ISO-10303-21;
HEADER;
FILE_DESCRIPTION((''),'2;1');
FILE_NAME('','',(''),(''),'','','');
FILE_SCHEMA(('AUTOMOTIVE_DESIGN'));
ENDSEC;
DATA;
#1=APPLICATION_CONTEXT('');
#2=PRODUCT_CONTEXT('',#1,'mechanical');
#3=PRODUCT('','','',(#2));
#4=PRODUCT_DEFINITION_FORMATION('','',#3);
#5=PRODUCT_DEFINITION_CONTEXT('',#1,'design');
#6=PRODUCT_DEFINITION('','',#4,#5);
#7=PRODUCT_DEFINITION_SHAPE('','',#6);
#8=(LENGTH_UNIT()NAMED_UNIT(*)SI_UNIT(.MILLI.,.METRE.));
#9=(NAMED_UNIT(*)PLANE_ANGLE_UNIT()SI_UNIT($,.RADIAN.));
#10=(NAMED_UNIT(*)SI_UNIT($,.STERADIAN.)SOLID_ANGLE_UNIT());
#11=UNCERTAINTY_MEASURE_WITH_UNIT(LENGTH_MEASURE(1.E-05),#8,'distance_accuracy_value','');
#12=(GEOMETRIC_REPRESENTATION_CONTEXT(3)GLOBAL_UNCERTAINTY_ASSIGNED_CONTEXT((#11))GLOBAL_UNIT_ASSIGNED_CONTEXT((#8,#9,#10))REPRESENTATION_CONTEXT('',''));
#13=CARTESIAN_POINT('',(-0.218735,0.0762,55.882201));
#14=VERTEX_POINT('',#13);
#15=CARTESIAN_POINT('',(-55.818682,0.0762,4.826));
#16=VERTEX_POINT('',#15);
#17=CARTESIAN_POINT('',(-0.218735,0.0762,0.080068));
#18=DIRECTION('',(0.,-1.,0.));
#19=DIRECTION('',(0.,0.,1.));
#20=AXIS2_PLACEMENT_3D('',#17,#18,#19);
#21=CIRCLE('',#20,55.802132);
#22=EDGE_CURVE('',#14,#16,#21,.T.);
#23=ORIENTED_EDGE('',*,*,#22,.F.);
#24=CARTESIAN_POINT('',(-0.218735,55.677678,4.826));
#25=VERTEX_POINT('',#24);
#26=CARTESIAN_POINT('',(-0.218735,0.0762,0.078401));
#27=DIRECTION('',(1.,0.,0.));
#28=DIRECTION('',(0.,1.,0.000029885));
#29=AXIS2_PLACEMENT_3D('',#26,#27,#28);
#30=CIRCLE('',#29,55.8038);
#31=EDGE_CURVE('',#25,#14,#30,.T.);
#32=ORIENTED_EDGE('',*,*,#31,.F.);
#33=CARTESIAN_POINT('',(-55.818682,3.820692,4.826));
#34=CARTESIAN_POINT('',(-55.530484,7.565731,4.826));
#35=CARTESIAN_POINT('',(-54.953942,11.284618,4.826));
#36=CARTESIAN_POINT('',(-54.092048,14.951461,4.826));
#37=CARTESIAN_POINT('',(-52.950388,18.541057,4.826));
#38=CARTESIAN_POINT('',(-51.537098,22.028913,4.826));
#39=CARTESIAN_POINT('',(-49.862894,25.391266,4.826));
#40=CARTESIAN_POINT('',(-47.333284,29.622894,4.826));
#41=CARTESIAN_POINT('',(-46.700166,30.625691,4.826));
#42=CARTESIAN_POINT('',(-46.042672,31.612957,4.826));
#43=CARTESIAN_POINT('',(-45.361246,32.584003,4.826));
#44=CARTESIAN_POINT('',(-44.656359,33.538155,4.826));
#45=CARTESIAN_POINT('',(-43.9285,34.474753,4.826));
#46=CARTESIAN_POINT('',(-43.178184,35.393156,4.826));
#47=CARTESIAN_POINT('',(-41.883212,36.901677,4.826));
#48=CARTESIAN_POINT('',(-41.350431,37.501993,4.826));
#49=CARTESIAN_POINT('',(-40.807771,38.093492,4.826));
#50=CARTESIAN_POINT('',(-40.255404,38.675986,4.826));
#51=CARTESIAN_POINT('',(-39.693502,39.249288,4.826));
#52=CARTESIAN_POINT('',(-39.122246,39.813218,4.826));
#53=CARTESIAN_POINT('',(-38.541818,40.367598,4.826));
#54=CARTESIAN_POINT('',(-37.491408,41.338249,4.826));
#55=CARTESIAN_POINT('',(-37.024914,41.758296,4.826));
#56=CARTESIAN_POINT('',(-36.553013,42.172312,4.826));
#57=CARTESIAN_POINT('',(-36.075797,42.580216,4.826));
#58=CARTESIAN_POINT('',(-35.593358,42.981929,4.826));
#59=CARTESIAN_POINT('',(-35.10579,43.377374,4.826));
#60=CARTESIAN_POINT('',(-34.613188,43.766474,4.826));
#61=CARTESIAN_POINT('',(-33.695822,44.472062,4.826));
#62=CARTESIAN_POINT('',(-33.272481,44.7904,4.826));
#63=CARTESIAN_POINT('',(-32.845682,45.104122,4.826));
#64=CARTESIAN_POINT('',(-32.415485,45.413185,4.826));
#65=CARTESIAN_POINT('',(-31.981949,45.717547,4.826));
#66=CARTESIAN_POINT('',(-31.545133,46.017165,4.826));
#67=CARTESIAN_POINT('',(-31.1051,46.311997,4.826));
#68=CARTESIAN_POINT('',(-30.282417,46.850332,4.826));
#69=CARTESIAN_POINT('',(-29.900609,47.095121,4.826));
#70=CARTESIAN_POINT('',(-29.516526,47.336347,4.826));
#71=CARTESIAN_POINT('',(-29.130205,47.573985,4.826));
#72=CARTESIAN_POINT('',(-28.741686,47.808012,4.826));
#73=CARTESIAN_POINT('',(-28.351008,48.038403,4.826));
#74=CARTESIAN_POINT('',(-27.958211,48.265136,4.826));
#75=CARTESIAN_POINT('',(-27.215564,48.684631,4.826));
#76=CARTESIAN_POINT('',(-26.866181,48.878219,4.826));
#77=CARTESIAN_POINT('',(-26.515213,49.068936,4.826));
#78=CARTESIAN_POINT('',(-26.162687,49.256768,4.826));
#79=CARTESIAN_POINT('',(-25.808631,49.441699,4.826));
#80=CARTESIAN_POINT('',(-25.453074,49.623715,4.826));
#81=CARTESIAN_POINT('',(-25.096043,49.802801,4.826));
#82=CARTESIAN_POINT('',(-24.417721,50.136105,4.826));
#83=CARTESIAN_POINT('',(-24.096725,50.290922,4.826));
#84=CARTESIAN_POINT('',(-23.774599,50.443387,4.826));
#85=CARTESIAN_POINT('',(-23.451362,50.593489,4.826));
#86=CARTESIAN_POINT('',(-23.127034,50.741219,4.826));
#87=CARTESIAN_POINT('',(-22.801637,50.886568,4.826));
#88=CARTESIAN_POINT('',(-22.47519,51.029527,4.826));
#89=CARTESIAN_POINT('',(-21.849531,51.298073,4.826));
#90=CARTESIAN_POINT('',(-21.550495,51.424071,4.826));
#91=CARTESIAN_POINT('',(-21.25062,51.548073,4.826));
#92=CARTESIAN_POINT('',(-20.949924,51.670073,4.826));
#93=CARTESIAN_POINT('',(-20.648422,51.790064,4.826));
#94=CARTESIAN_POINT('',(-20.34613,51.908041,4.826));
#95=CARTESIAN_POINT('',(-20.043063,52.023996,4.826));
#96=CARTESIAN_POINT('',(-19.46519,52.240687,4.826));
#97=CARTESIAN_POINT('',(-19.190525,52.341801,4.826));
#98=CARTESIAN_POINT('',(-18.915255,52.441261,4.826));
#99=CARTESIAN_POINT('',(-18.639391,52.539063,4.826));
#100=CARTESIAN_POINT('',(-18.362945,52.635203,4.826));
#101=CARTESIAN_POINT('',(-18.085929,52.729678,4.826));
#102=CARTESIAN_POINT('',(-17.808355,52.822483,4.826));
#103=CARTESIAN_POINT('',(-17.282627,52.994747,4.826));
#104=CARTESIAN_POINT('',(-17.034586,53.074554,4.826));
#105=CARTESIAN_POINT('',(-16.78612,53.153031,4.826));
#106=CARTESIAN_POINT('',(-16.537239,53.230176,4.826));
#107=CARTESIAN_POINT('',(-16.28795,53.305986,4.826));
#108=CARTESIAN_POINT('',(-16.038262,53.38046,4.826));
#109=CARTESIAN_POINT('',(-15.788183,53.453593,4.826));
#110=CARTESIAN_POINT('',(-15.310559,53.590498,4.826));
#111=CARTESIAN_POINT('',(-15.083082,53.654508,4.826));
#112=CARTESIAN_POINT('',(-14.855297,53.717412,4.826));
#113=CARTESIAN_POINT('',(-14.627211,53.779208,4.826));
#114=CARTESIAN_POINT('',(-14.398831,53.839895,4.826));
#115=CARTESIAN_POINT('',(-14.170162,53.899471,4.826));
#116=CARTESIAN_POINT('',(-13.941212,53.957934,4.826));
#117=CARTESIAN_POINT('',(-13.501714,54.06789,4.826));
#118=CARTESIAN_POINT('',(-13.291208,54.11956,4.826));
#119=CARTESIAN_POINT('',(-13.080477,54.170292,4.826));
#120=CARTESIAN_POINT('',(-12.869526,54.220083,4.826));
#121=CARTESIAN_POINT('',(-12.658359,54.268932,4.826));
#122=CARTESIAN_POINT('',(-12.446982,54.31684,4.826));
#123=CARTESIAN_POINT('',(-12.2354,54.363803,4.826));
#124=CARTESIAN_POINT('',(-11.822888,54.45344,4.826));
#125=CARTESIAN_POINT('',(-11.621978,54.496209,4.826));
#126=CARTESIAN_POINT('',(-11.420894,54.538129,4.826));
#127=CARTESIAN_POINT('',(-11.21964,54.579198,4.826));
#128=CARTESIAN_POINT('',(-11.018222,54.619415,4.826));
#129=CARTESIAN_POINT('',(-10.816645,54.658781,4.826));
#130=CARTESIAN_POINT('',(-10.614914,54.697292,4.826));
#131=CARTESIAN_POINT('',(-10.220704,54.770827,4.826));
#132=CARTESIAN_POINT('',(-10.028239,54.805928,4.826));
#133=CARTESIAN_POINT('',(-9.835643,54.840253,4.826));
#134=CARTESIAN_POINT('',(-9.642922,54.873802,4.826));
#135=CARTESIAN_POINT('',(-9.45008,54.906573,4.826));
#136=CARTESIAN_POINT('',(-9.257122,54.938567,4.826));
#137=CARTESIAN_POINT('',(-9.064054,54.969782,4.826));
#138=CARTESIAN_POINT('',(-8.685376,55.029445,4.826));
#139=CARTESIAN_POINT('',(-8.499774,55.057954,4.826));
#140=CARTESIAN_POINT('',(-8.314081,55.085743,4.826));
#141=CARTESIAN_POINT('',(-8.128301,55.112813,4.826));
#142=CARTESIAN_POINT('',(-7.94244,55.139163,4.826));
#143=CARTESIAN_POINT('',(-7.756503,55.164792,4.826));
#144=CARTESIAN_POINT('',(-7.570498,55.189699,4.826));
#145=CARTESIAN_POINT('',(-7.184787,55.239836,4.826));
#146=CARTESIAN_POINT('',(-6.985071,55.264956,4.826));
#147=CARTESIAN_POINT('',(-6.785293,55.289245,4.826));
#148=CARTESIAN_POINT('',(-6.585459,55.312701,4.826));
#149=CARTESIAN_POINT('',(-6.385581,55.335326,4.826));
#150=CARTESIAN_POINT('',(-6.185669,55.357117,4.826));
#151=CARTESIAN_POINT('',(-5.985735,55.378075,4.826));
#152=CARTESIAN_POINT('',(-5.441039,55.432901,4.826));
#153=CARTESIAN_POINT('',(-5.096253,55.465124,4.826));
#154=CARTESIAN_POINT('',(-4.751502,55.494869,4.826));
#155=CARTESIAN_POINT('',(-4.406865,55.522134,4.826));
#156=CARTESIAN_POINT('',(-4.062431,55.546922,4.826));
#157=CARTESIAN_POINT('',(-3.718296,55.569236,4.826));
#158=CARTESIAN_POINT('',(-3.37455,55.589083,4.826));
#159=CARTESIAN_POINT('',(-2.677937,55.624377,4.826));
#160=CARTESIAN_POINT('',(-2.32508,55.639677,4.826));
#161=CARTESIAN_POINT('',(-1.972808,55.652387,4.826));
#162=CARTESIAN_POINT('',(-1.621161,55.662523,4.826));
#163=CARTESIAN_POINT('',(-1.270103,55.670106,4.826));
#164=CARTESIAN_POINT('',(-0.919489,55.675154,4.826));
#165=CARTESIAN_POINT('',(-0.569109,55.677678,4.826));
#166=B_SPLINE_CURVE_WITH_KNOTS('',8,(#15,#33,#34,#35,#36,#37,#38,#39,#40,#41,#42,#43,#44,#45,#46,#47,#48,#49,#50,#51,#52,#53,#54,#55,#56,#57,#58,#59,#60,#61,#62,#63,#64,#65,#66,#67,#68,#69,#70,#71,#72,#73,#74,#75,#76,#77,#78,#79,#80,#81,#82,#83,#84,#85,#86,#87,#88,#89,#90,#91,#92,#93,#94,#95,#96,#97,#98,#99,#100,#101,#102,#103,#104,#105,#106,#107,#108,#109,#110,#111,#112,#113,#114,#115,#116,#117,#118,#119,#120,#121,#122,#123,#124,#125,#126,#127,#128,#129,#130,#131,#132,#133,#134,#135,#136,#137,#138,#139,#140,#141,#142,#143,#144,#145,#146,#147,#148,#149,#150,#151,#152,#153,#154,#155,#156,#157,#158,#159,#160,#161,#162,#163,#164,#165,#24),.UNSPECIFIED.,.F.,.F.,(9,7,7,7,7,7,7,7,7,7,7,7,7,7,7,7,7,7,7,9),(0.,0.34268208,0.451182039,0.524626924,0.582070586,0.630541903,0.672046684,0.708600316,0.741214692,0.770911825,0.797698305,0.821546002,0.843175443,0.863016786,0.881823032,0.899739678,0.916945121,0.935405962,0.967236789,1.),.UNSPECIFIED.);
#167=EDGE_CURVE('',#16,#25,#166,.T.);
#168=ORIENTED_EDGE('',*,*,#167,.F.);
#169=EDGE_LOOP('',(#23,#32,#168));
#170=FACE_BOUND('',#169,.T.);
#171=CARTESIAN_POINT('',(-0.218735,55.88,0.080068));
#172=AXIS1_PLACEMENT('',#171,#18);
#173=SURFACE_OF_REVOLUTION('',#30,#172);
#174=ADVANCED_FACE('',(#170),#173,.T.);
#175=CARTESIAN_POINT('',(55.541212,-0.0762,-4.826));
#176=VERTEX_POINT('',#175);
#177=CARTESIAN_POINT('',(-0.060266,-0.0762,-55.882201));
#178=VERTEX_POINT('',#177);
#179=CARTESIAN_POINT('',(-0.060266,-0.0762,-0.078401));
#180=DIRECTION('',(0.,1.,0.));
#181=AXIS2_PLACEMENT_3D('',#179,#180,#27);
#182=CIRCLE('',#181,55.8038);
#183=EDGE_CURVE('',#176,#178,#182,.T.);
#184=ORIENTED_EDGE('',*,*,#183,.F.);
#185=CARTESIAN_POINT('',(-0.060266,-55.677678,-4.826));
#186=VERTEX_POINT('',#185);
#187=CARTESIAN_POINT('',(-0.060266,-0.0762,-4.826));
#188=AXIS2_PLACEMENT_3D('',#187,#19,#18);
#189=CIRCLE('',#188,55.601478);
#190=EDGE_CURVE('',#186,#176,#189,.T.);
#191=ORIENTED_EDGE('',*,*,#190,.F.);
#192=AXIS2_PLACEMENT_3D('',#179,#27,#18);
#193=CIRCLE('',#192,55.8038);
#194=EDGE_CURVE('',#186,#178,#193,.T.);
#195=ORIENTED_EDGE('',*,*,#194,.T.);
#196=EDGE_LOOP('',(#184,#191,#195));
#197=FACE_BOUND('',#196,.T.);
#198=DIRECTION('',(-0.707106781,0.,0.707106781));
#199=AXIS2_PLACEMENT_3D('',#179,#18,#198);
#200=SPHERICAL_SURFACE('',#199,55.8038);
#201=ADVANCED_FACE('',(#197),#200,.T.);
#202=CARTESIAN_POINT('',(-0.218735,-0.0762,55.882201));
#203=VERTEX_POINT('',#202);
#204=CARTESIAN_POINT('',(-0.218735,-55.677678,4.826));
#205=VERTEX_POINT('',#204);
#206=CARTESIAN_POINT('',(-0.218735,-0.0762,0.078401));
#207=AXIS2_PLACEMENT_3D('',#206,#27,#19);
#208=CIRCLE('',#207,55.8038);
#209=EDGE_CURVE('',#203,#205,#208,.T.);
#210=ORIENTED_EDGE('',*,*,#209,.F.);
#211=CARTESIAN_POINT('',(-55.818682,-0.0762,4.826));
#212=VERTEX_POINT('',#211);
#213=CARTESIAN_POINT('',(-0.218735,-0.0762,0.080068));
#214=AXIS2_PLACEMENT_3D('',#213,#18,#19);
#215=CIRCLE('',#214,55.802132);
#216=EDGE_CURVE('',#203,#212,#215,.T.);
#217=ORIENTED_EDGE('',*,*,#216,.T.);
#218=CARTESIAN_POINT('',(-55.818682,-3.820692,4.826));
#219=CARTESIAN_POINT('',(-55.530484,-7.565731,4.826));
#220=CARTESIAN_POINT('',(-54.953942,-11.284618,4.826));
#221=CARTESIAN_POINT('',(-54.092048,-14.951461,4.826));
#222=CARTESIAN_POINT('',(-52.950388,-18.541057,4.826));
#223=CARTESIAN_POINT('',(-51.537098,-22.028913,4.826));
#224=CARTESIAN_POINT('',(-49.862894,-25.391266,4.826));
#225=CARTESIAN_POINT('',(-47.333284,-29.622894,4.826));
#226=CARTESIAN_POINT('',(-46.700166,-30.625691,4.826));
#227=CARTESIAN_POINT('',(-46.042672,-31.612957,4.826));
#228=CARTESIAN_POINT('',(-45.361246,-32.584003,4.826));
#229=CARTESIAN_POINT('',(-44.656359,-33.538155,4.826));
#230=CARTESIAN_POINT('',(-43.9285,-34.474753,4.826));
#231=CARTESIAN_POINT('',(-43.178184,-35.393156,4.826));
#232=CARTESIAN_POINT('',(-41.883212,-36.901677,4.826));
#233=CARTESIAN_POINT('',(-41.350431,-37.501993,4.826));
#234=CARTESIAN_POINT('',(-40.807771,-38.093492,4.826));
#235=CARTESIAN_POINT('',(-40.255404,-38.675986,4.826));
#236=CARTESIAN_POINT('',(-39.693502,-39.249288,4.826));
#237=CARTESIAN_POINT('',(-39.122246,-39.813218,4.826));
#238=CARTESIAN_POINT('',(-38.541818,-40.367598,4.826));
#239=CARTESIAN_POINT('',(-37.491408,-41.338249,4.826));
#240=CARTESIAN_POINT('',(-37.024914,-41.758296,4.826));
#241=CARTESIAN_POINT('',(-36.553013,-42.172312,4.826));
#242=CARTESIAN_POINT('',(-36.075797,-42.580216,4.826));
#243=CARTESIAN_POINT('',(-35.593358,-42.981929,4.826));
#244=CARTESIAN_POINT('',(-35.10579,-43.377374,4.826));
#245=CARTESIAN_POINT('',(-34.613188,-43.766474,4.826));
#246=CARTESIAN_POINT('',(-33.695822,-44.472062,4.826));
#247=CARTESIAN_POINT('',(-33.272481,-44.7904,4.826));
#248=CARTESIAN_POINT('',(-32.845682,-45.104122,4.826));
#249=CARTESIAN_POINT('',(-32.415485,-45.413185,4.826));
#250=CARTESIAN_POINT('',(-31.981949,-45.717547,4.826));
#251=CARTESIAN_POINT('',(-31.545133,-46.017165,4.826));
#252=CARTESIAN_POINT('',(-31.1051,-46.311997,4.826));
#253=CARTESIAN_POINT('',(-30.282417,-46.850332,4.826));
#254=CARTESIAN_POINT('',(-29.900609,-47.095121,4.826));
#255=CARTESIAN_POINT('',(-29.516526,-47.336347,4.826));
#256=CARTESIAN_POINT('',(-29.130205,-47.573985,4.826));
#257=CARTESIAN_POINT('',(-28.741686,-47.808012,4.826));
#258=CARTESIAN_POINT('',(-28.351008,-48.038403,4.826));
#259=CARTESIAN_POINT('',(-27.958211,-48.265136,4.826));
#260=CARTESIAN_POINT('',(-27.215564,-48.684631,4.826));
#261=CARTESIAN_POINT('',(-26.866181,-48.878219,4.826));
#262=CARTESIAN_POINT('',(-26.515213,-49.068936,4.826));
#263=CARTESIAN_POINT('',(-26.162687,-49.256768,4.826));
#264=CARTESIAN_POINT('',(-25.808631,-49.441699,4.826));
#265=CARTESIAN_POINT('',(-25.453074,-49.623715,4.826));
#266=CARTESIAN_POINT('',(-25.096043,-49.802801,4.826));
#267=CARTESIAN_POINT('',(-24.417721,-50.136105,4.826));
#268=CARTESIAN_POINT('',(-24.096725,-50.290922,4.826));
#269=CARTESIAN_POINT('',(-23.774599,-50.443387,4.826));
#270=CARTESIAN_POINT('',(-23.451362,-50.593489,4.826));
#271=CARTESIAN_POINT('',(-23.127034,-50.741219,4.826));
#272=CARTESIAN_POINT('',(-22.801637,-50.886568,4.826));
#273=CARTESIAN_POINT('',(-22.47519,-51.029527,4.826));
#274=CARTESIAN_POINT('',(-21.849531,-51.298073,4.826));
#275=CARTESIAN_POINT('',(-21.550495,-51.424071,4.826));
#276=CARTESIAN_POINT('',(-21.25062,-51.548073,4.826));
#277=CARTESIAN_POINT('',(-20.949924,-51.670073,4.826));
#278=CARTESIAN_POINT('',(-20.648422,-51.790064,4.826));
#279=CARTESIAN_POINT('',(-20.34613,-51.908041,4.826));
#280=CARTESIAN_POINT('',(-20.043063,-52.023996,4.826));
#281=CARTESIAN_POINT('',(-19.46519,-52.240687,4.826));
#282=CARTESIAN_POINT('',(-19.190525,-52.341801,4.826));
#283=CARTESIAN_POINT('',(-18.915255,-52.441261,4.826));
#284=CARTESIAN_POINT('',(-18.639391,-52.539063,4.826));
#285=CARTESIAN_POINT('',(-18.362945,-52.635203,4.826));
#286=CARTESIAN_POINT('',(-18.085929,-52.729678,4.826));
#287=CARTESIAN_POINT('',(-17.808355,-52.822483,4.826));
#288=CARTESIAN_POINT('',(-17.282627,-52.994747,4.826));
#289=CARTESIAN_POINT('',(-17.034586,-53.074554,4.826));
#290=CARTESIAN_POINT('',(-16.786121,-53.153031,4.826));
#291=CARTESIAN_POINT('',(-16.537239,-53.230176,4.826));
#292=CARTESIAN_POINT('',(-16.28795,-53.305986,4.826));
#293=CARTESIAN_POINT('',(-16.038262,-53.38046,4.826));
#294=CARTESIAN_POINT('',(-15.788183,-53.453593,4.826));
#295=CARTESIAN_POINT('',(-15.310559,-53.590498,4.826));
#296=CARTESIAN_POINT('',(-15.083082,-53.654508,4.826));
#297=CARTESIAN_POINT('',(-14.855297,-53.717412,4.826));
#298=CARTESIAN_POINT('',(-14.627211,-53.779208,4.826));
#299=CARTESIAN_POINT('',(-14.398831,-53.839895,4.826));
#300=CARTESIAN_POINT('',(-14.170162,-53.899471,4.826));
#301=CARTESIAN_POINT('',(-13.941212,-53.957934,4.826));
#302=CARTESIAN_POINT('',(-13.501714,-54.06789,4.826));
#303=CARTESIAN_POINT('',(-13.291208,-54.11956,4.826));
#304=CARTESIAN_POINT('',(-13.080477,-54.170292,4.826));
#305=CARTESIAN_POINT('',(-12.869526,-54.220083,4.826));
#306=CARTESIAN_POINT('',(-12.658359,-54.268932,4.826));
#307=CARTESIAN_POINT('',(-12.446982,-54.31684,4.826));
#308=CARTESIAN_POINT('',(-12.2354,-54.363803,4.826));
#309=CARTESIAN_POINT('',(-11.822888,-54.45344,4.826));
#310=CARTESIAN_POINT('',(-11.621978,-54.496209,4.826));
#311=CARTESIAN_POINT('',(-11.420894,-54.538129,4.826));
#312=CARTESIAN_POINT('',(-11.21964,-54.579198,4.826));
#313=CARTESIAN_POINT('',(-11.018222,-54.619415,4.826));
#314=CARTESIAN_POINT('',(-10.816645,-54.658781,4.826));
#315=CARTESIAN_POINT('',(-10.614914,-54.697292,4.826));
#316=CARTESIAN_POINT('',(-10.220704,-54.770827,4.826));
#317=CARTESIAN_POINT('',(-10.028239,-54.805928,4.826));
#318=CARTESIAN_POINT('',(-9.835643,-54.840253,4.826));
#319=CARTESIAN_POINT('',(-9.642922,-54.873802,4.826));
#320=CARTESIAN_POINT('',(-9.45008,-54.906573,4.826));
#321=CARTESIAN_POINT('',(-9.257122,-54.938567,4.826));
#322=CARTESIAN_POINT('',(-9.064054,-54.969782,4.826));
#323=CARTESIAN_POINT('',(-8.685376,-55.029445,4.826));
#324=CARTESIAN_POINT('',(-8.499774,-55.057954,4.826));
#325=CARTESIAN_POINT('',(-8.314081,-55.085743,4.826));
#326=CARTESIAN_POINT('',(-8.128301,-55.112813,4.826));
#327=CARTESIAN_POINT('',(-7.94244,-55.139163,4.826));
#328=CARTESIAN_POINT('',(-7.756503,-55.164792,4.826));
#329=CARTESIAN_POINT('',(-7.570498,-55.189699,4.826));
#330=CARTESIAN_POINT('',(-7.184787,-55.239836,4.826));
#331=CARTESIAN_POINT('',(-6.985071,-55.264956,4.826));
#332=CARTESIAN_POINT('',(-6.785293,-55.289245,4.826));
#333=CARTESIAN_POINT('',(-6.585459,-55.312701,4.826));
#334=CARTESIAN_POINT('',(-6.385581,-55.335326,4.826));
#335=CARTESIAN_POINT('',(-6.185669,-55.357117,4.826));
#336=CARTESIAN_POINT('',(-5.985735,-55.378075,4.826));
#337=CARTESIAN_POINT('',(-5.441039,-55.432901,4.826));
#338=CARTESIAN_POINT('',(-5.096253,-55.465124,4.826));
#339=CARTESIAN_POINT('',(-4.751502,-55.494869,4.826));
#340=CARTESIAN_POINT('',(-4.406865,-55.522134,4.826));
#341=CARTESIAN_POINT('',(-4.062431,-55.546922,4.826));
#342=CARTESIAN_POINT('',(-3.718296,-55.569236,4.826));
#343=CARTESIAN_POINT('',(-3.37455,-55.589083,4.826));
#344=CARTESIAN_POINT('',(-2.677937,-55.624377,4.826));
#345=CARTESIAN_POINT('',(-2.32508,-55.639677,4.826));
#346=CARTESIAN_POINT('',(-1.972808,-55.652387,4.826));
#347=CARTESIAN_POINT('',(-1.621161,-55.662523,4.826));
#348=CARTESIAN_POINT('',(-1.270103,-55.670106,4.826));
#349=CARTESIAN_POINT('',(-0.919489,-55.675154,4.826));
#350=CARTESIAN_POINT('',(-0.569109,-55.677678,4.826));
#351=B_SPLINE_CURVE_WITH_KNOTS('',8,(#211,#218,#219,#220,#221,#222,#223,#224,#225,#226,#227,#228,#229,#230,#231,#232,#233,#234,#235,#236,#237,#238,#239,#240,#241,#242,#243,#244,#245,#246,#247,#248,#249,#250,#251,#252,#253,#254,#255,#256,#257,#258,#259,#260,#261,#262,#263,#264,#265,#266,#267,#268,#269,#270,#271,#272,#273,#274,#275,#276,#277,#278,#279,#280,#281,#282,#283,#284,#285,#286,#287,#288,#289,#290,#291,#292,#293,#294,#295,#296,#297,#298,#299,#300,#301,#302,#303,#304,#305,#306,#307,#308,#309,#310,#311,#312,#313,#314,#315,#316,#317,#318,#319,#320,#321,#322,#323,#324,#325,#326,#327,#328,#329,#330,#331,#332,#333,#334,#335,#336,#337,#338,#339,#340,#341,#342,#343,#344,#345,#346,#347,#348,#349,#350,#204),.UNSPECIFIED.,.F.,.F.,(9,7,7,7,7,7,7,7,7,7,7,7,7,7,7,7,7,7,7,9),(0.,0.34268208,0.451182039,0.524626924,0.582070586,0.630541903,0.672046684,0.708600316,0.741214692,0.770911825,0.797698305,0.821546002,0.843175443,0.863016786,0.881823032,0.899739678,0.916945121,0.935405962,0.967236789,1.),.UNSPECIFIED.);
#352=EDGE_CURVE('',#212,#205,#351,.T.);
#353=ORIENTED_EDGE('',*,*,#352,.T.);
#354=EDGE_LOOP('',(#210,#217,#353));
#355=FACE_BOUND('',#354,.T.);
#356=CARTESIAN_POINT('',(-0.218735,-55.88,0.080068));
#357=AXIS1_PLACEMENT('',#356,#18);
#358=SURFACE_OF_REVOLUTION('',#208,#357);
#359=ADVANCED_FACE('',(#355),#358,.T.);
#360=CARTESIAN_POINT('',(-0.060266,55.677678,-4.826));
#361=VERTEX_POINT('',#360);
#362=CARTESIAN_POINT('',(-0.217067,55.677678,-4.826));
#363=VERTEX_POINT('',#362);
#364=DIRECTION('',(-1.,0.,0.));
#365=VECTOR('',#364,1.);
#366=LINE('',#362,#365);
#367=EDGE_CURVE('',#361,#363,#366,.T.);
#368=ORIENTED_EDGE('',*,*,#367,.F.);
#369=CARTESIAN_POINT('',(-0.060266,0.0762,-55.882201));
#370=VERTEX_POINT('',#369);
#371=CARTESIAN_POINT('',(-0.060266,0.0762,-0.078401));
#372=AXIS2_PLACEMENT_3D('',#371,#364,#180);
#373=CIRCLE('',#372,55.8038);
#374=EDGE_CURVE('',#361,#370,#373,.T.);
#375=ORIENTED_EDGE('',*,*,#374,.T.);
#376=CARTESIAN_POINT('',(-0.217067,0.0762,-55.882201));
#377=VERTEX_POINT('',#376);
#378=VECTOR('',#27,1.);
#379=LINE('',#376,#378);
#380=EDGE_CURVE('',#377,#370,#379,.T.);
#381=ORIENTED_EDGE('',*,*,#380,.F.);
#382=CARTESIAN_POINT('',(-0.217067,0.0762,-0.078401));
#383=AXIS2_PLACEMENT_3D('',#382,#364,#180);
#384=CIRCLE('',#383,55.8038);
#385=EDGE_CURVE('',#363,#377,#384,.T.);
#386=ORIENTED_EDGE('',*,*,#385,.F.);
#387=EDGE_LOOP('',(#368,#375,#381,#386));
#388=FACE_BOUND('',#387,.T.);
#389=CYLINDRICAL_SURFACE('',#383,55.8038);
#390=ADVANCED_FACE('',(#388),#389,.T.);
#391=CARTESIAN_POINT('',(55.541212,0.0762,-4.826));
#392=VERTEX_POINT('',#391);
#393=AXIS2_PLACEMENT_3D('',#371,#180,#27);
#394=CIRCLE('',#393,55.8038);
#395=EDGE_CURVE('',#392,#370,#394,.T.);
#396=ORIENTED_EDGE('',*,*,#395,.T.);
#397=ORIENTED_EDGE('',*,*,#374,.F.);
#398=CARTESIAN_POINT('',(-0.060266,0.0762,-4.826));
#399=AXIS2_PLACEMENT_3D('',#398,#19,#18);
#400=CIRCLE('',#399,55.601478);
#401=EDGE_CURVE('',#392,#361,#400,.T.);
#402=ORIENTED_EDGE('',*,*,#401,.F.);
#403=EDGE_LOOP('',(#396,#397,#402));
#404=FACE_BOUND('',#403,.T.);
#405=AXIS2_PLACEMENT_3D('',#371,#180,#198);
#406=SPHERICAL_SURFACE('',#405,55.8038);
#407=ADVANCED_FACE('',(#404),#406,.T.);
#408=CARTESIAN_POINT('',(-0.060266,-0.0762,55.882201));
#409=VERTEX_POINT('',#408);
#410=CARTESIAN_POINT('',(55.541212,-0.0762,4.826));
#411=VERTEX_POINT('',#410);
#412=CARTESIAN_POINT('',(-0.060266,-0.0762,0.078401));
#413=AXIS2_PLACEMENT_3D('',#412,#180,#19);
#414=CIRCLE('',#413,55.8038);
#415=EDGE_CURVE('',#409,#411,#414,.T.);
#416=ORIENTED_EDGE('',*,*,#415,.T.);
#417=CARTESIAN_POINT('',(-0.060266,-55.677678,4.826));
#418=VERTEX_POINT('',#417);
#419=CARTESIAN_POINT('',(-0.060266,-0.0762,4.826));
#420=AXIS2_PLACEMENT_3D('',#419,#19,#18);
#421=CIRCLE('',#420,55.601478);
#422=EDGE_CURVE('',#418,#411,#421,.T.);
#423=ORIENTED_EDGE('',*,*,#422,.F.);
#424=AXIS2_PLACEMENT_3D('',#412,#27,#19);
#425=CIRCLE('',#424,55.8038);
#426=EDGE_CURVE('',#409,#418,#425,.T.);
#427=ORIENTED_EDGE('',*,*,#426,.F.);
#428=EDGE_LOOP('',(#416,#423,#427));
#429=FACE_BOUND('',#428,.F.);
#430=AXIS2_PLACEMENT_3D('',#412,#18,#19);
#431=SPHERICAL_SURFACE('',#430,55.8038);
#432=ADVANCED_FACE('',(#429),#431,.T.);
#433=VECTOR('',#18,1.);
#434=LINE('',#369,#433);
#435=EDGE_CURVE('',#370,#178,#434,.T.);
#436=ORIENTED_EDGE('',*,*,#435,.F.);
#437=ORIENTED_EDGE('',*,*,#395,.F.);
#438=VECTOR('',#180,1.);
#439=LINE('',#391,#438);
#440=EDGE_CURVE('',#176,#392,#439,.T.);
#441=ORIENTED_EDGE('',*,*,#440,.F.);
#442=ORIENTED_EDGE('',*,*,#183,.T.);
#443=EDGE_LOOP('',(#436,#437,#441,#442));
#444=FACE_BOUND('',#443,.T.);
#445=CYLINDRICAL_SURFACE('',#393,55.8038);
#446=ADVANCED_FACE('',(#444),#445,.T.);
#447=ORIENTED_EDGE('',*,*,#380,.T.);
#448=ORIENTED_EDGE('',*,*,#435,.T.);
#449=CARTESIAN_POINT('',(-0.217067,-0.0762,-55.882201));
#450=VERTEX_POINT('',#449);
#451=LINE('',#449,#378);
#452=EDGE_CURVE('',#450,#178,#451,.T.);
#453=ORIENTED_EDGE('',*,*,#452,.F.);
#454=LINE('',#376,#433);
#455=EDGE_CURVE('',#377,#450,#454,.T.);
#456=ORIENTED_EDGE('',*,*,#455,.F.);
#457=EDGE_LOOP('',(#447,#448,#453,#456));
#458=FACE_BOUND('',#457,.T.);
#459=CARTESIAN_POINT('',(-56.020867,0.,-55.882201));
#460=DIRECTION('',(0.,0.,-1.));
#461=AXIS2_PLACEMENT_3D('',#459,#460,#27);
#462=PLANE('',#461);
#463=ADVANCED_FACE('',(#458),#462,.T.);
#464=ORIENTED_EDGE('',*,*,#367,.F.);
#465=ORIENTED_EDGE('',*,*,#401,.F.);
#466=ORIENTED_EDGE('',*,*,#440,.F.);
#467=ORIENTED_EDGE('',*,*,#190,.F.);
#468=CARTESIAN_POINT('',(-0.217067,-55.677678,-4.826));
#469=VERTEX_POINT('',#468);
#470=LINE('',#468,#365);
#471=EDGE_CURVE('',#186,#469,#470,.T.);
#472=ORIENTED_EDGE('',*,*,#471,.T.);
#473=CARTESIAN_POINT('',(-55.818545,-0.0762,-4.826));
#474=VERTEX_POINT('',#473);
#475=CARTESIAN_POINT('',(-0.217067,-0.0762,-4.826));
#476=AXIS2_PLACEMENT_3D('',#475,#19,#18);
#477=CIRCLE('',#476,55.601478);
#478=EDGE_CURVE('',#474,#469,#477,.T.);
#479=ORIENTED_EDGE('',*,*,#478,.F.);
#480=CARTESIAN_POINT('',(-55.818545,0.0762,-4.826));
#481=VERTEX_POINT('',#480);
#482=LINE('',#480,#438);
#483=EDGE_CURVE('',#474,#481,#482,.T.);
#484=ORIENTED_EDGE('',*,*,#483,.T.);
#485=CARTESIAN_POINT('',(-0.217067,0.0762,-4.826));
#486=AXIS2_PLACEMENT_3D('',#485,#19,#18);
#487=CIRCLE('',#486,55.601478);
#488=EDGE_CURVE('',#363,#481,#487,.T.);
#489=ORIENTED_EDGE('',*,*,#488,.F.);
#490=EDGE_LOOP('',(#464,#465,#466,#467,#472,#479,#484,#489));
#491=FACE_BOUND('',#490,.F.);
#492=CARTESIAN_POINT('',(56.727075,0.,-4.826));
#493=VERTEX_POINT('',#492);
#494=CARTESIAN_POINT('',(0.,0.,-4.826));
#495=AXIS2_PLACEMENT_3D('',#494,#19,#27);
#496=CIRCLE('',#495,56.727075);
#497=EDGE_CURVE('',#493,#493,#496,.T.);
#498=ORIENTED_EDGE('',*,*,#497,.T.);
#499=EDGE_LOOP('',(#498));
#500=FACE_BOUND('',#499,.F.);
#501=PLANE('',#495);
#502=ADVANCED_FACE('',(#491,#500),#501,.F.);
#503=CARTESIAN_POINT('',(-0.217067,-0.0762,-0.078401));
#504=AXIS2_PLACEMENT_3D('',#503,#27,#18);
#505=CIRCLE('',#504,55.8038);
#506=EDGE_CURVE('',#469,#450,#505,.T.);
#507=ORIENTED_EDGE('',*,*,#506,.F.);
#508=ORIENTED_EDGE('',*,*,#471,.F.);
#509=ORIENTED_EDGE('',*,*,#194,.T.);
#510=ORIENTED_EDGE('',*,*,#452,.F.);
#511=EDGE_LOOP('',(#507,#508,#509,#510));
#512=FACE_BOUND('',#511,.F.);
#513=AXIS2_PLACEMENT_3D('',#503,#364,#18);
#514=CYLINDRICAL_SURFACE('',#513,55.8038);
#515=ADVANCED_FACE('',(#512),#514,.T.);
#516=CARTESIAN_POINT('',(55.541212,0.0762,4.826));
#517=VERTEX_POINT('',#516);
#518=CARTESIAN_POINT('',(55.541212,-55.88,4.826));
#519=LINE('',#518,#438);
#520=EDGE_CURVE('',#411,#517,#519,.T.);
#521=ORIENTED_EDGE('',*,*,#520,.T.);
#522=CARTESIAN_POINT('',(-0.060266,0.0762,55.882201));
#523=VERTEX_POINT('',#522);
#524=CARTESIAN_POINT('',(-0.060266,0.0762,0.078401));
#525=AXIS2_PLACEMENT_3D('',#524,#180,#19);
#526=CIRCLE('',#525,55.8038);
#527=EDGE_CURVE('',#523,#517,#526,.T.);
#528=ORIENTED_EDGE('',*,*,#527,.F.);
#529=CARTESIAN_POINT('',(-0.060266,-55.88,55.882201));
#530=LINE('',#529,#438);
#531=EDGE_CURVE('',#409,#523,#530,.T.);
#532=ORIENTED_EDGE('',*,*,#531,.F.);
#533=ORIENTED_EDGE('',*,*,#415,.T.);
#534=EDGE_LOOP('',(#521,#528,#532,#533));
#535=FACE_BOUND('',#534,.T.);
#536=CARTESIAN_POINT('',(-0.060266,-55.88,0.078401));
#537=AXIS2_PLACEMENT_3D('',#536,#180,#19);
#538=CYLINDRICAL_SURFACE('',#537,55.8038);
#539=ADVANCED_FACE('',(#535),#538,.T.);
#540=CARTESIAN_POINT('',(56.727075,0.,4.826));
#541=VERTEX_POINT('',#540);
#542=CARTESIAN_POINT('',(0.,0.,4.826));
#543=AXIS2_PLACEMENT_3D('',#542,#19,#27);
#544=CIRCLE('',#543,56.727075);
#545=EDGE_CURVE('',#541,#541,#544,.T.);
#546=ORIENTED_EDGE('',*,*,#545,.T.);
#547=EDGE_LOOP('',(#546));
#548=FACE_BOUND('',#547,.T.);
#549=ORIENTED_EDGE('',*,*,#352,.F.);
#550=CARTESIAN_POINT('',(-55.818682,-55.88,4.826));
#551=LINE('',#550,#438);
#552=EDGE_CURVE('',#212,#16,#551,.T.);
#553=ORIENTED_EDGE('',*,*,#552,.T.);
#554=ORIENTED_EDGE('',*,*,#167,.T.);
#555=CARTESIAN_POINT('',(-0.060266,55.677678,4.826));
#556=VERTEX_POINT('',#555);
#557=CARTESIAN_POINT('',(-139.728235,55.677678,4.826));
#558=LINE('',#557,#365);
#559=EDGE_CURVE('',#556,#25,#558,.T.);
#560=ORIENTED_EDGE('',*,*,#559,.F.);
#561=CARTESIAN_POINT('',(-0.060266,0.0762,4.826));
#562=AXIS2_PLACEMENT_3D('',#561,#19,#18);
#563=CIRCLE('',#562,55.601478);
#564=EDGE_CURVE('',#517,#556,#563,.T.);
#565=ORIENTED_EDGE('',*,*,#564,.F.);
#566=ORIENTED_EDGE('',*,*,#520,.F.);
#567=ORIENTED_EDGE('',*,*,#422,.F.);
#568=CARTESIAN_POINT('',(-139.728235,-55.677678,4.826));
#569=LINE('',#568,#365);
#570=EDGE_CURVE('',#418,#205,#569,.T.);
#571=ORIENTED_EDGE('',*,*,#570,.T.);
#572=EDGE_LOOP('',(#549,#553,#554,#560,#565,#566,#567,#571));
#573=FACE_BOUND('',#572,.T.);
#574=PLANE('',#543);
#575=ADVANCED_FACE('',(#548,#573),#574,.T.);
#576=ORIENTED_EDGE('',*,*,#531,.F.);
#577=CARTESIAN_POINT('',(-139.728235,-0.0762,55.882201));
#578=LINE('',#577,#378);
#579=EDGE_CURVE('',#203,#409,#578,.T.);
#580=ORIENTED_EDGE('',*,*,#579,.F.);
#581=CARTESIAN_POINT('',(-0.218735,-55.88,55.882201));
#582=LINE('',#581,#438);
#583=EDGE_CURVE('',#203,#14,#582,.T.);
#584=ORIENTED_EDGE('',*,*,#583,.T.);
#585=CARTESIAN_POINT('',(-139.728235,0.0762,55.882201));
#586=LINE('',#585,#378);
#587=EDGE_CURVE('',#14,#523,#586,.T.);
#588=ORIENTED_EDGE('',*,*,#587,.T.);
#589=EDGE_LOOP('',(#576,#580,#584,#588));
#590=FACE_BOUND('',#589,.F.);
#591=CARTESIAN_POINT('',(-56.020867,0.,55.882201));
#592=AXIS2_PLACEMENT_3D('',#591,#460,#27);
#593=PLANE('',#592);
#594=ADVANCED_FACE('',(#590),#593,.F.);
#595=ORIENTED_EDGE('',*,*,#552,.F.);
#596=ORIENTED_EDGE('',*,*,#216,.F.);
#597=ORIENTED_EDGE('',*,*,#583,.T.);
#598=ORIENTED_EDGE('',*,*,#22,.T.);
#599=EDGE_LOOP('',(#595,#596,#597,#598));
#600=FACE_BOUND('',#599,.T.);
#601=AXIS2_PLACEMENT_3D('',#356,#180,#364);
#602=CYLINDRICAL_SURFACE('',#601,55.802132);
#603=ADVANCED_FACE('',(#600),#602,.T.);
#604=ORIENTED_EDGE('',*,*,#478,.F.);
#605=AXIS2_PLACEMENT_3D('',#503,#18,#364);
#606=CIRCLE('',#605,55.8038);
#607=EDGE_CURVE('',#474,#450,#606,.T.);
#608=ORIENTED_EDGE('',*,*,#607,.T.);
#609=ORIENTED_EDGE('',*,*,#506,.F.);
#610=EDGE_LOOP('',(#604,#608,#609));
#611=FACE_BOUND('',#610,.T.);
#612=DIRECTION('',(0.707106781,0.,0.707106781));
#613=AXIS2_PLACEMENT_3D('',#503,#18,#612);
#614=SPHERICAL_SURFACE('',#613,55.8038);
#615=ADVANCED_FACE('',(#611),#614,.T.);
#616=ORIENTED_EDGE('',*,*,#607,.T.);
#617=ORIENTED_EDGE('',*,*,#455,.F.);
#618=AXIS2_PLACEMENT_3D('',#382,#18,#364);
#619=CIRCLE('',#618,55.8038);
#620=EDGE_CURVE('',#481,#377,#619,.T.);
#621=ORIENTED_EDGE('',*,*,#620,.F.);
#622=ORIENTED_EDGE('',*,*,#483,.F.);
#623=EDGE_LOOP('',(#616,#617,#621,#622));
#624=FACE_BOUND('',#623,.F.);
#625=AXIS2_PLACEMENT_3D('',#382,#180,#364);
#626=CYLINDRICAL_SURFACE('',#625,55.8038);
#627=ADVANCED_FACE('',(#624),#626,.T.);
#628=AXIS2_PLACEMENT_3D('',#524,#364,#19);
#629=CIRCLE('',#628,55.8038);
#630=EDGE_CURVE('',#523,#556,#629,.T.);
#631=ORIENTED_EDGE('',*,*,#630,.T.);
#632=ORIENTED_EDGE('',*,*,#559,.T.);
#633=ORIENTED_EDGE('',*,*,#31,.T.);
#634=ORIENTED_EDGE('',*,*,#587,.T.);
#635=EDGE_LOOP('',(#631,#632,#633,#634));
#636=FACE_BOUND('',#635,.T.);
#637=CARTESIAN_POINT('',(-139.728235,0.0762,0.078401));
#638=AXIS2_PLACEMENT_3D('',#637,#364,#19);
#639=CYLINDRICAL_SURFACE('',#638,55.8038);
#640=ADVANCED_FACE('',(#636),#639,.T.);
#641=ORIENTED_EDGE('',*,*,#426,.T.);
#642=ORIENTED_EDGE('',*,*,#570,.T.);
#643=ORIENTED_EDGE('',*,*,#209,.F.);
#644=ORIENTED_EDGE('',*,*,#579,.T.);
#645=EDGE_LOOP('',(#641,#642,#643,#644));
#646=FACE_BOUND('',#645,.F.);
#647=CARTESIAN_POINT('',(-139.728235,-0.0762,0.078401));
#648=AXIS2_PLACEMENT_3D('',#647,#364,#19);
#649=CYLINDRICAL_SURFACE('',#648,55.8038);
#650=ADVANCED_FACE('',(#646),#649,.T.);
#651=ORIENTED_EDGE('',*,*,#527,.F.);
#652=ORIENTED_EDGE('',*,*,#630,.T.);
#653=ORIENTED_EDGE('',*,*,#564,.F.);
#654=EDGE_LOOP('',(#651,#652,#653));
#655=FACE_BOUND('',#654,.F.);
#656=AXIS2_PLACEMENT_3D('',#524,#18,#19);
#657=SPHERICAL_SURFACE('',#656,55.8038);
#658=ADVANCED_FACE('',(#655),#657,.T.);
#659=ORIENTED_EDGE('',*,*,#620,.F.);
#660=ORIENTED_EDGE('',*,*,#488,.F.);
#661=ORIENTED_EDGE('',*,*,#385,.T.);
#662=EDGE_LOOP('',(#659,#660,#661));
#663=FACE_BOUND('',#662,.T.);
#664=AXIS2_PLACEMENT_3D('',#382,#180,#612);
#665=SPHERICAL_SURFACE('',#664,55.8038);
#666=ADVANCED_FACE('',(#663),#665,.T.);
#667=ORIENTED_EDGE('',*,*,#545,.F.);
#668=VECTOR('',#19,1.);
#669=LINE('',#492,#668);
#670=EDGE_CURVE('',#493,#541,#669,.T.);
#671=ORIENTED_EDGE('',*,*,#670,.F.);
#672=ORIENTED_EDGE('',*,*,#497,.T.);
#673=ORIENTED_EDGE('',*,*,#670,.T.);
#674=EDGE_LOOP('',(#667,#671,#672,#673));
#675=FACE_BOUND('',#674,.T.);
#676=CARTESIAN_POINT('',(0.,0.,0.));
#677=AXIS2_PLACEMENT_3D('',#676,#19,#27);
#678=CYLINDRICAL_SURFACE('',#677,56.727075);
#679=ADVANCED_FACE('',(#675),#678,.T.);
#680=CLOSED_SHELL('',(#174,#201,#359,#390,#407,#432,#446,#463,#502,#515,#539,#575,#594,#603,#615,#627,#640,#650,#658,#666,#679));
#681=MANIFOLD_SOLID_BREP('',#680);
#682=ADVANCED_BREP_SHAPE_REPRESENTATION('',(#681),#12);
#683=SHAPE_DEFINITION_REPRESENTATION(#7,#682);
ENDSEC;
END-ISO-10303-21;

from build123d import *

# Parameters (mm, degrees)
F0_W         = 111.7644011974
F0_H         = 111.7644011974
F1_DEPTH     = 55.88
F2_R         = 55.8021322807
F3_R         = 55.8038
F5_T1_DEPTH  = 139.6679689167
F5_T3_DEPTH  = 0.1568011974
F5_T5_DEPTH  = 0.1524
F5_T7_DEPTH  = 139.6679689167
F5_T9_DEPTH  = 0.1568011974
F5_S13_W     = 56.919876
F5_S13_H     = 56.919876
F5_T14_DEPTH = 56.919876
F5_S19_W     = 56.919876
F5_S19_H     = 56.919876
F5_T20_DEPTH = 56.919876
F5_S25_W     = 56.919876
F5_S25_H     = 56.919876
F5_T26_DEPTH = 56.919876
F5_S31_W     = 56.919876
F5_S31_H     = 56.919876
F5_T32_DEPTH = 56.919876
F5_T36_ANGLE = 90
F5_T38_ANGLE = 90
F5_T40_ANGLE = 90
F5_T42_ANGLE = 90
F6_R         = 56.7270748454
F7_DEPTH     = 4.826


# Not quite as in the source:
# - a fillet or chamfer that OpenCascade refuses, or shapes differently, is made with other operations: its cross-section is extruded or revolved along the edge and cut away or added
# - a feature of the source that left no trace in its solid (it failed there, or was rolled back) is left out


with BuildPart() as f1:
    # F0 (on Front) → F1 (new body, symmetric)
    with BuildSketch(Plane.XZ):
        with Locations((-0.1386664808, 0)):
            Rectangle(F0_W, F0_H)
    extrude(amount=F1_DEPTH, both=True)

    # F2
    f2_edges = [f1.edges().sort_by_distance(p)[0] for p in [
        (-56.020867, 0, 55.882201),
    ]]
    fillet(f2_edges, radius=F2_R)

    # F3
    f3_edges = [f1.edges().sort_by_distance(p)[0] for p in [
        (55.743534, 0, 55.882201),
    ]]
    fillet(f3_edges, radius=F3_R)

    # F5: fillet of radius 55.8038 on 10 edges, made by hand

    # F5_s2 → F5_t1 (cut)
    with BuildSketch(Plane.YZ.offset(-139.7282347988)):
        with BuildLine():
            ThreePointArc((0.0762, 55.8822005987), (39.535445396, 39.5376459947), (55.88, 0.0784005987))
            Line((55.88, 0.0784005987), (56.996076, 0.0784005987))
            Line((56.996076, 0.0784005987), (56.996076, 56.9982765987))
            Line((56.996076, 56.9982765987), (0.0762, 56.9982765987))
            Line((0.0762, 56.9982765987), (0.0762, 55.8822005987))
        make_face()
        with BuildLine():
            ThreePointArc((-0.0762, 55.8822005987), (-39.535445396, 39.5376459947), (-55.88, 0.0784005987))
            Line((-55.88, 0.0784005987), (-56.996076, 0.0784005987))
            Line((-56.996076, 0.0784005987), (-56.996076, 56.9982765987))
            Line((-56.996076, 56.9982765987), (-0.0762, 56.9982765987))
            Line((-0.0762, 56.9982765987), (-0.0762, 55.8822005987))
        make_face()
    extrude(amount=F5_T1_DEPTH, mode=Mode.SUBTRACT)

    # F5_s4 → F5_t3 (cut)
    with BuildSketch(Plane.YZ.offset(-0.2170670795)):
        with BuildLine():
            ThreePointArc((55.88, -0.0784005987), (39.535445396, -39.5376459947), (0.0762, -55.8822005987))
            Line((0.0762, -55.8822005987), (0.0762, -56.9982765987))
            Line((0.0762, -56.9982765987), (56.996076, -56.9982765987))
            Line((56.996076, -56.9982765987), (56.996076, -0.0784005987))
            Line((56.996076, -0.0784005987), (55.88, -0.0784005987))
        make_face()
        with BuildLine():
            ThreePointArc((-55.88, -0.0784005987), (-39.535445396, -39.5376459947), (-0.0762, -55.8822005987))
            Line((-0.0762, -55.8822005987), (-0.0762, -56.9982765987))
            Line((-0.0762, -56.9982765987), (-56.996076, -56.9982765987))
            Line((-56.996076, -56.9982765987), (-56.996076, -0.0784005987))
            Line((-56.996076, -0.0784005987), (-55.88, -0.0784005987))
        make_face()
    extrude(amount=F5_T3_DEPTH, mode=Mode.SUBTRACT)

    # F5_s6 → F5_t5 (cut)
    with BuildSketch(Plane.XZ.offset(-0.0762)):
        with BuildLine():
            ThreePointArc((55.7435341179, -0.0784005987), (39.3989795139, -39.5376459947), (-0.0602658821, -55.8822005987))
            Line((-0.0602658821, -55.8822005987), (-0.0602658821, -56.9982765987))
            Line((-0.0602658821, -56.9982765987), (56.8596101179, -56.9982765987))
            Line((56.8596101179, -56.9982765987), (56.8596101179, -0.0784005987))
            Line((56.8596101179, -0.0784005987), (55.7435341179, -0.0784005987))
        make_face()
        with BuildLine():
            ThreePointArc((-56.0208670795, -0.0784005987), (-39.6763124755, -39.5376459947), (-0.2170670795, -55.8822005987))
            Line((-0.2170670795, -55.8822005987), (-0.2170670795, -56.9982765987))
            Line((-0.2170670795, -56.9982765987), (-57.1369430795, -56.9982765987))
            Line((-57.1369430795, -56.9982765987), (-57.1369430795, -0.0784005987))
            Line((-57.1369430795, -0.0784005987), (-56.0208670795, -0.0784005987))
        make_face()
    extrude(amount=F5_T5_DEPTH, mode=Mode.SUBTRACT)

    # F5_s8 → F5_t7 (cut)
    with BuildSketch(Plane.XY.offset(-0.0784005987)):
        with BuildLine():
            ThreePointArc((-0.2170670795, -55.88), (-39.6763124755, -39.535445396), (-56.0208670795, -0.0762))
            Line((-56.0208670795, -0.0762), (-57.1369430795, -0.0762))
            Line((-57.1369430795, -0.0762), (-57.1369430795, -56.996076))
            Line((-57.1369430795, -56.996076), (-0.2170670795, -56.996076))
            Line((-0.2170670795, -56.996076), (-0.2170670795, -55.88))
        make_face()
        with BuildLine():
            ThreePointArc((-0.2170670795, 55.88), (-39.6763124755, 39.535445396), (-56.0208670795, 0.0762))
            Line((-56.0208670795, 0.0762), (-57.1369430795, 0.0762))
            Line((-57.1369430795, 0.0762), (-57.1369430795, 56.996076))
            Line((-57.1369430795, 56.996076), (-0.2170670795, 56.996076))
            Line((-0.2170670795, 56.996076), (-0.2170670795, 55.88))
        make_face()
    extrude(amount=F5_T7_DEPTH, mode=Mode.SUBTRACT)

    # F5_s10 → F5_t9 (cut)
    with BuildSketch(Plane.XY.offset(-0.0784005987)):
        with BuildLine():
            ThreePointArc((-0.0602658821, -55.88), (39.3989795139, -39.535445396), (55.7435341179, -0.0762))
            Line((55.7435341179, -0.0762), (56.8596101179, -0.0762))
            Line((56.8596101179, -0.0762), (56.8596101179, -56.996076))
            Line((56.8596101179, -56.996076), (-0.0602658821, -56.996076))
            Line((-0.0602658821, -56.996076), (-0.0602658821, -55.88))
        make_face()
        with BuildLine():
            ThreePointArc((-0.0602658821, 55.88), (39.3989795139, 39.535445396), (55.7435341179, 0.0762))
            Line((55.7435341179, 0.0762), (56.8596101179, 0.0762))
            Line((56.8596101179, 0.0762), (56.8596101179, 56.996076))
            Line((56.8596101179, 56.996076), (-0.0602658821, 56.996076))
            Line((-0.0602658821, 56.996076), (-0.0602658821, 55.88))
        make_face()
    extrude(amount=F5_T9_DEPTH, mode=Mode.SUBTRACT)


with BuildPart() as f5_tool12:
    # F5_s13 → F5_t14 (new body)
    with BuildSketch(Plane.XZ.offset(-0.0762)):
        with Locations((-28.6770050795, -28.5383385987)):
            Rectangle(F5_S13_W, F5_S13_H)
    extrude(amount=-F5_T14_DEPTH)

    # F5_s15 → F5_t16 (revolve, cut)
    with BuildSketch(Plane(origin=(-0.2170670795, 0.0762, -0.0784005987), x_dir=(0.7071067812, 0, 0.7071067812), z_dir=(-0.7071067812, 0, 0.7071067812))):
        with BuildLine():
            ThreePointArc((0, -55.8038), (55.8038, 0), (0, 55.8038))
            Line((0, 55.8038), (0, -55.8038))
        make_face()
    revolve(axis=Axis((-0.2170670795, 0.0762, -0.0784005987), (0, 1, 0)), mode=Mode.SUBTRACT)


with BuildPart() as f1_1:
    add(f1.part)

    # F5_t11: cut F5_tool12
    add(f5_tool12.part, mode=Mode.SUBTRACT)


with BuildPart() as f5_tool18:
    # F5_s19 → F5_t20 (new body)
    with BuildSketch(Plane.XZ.offset(-0.0762)):
        with Locations((28.3996721179, -28.5383385987)):
            Rectangle(F5_S19_W, F5_S19_H)
    extrude(amount=-F5_T20_DEPTH)

    # F5_s21 → F5_t22 (revolve, cut)
    with BuildSketch(Plane(origin=(-0.0602658821, 0.0762, -0.0784005987), x_dir=(-0.7071067812, 0, 0.7071067812), z_dir=(-0.7071067812, 0, -0.7071067812))):
        with BuildLine():
            ThreePointArc((0, -55.8038), (55.8038, 0), (0, 55.8038))
            Line((0, 55.8038), (0, -55.8038))
        make_face()
    revolve(axis=Axis((-0.0602658821, 0.0762, -0.0784005987), (0, 1, 0)), mode=Mode.SUBTRACT)


with BuildPart() as f1_2:
    add(f1_1.part)

    # F5_t17: cut F5_tool18
    add(f5_tool18.part, mode=Mode.SUBTRACT)


with BuildPart() as f5_tool24:
    # F5_s25 → F5_t26 (new body)
    with BuildSketch(Plane.XZ.offset(0.0762)):
        with Locations((-28.6770050795, -28.5383385987)):
            Rectangle(F5_S25_W, F5_S25_H)
    extrude(amount=F5_T26_DEPTH)

    # F5_s27 → F5_t28 (revolve, cut)
    with BuildSketch(Plane(origin=(-0.2170670795, -0.0762, -0.0784005987), x_dir=(0.7071067812, 0, 0.7071067812), z_dir=(0.7071067812, 0, -0.7071067812))):
        with BuildLine():
            ThreePointArc((0, -55.8038), (55.8038, 0), (0, 55.8038))
            Line((0, 55.8038), (0, -55.8038))
        make_face()
    revolve(axis=Axis((-0.2170670795, -0.0762, -0.0784005987), (0, -1, 0)), mode=Mode.SUBTRACT)


with BuildPart() as f1_3:
    add(f1_2.part)

    # F5_t23: cut F5_tool24
    add(f5_tool24.part, mode=Mode.SUBTRACT)


with BuildPart() as f5_tool30:
    # F5_s31 → F5_t32 (new body)
    with BuildSketch(Plane.XZ.offset(0.0762)):
        with Locations((28.3996721179, -28.5383385987)):
            Rectangle(F5_S31_W, F5_S31_H)
    extrude(amount=F5_T32_DEPTH)

    # F5_s33 → F5_t34 (revolve, cut)
    with BuildSketch(Plane(origin=(-0.0602658821, -0.0762, -0.0784005987), x_dir=(-0.7071067812, 0, 0.7071067812), z_dir=(0.7071067812, 0, 0.7071067812))):
        with BuildLine():
            ThreePointArc((0, -55.8038), (55.8038, 0), (0, 55.8038))
            Line((0, 55.8038), (0, -55.8038))
        make_face()
    revolve(axis=Axis((-0.0602658821, -0.0762, -0.0784005987), (0, -1, 0)), mode=Mode.SUBTRACT)


with BuildPart() as f1_4:
    add(f1_3.part)

    # F5_t29: cut F5_tool30
    add(f5_tool30.part, mode=Mode.SUBTRACT)

    # F5_s35 → F5_t36 (revolve, cut)
    with BuildSketch(Plane.YZ.offset(-0.0602658821)):
        with BuildLine():
            ThreePointArc((55.88, 0.0784005987), (39.535445396, 39.5376459947), (0.0762, 55.8822005987))
            Line((0.0762, 55.8822005987), (0.0762, 56.9982765987))
            Line((0.0762, 56.9982765987), (56.996076, 56.9982765987))
            Line((56.996076, 56.9982765987), (56.996076, 0.0784005987))
            Line((56.996076, 0.0784005987), (55.88, 0.0784005987))
        make_face()
    revolve(axis=Axis((-0.0602658821, 55.88, 0.0784005987), (0, 1, 0)), revolution_arc=F5_T36_ANGLE, mode=Mode.SUBTRACT)

    # F5_s37 → F5_t38 (revolve, cut)
    with BuildSketch(Plane.YZ.offset(-0.2187347988)):
        with BuildLine():
            ThreePointArc((55.8799999751, 0.080068318), (39.5348557638, 39.5382356181), (0.0762, 55.8822005987))
            Line((0.0762, 55.8822005987), (0.0762, 56.9982765987))
            Line((0.0762, 56.9982765987), (56.996076, 56.9982765987))
            Line((56.996076, 56.9982765987), (56.996076, 0.080068318))
            Line((56.996076, 0.080068318), (55.8799999751, 0.080068318))
        make_face()
    revolve(axis=Axis((-0.2187347988, 55.88, 0.080068318), (0, -1, 0)), revolution_arc=F5_T38_ANGLE, mode=Mode.SUBTRACT)

    # F5_s39 → F5_t40 (revolve, cut)
    with BuildSketch(Plane.YZ.offset(-0.0602658821)):
        with BuildLine():
            ThreePointArc((-0.0762, 55.8822005987), (-39.535445396, 39.5376459947), (-55.88, 0.0784005987))
            Line((-55.88, 0.0784005987), (-56.996076, 0.0784005987))
            Line((-56.996076, 0.0784005987), (-56.996076, 56.9982765987))
            Line((-56.996076, 56.9982765987), (-0.0762, 56.9982765987))
            Line((-0.0762, 56.9982765987), (-0.0762, 55.8822005987))
        make_face()
    revolve(axis=Axis((-0.0602658821, -55.88, 0.0784005987), (0, 1, 0)), revolution_arc=F5_T40_ANGLE, mode=Mode.SUBTRACT)

    # F5_s41 → F5_t42 (revolve, cut)
    with BuildSketch(Plane.YZ.offset(-0.2187347988)):
        with BuildLine():
            ThreePointArc((-0.0762, 55.8822005987), (-39.5348557638, 39.5382356181), (-55.8799999751, 0.080068318))
            Line((-55.8799999751, 0.080068318), (-56.996076, 0.080068318))
            Line((-56.996076, 0.080068318), (-56.996076, 56.9982765987))
            Line((-56.996076, 56.9982765987), (-0.0762, 56.9982765987))
            Line((-0.0762, 56.9982765987), (-0.0762, 55.8822005987))
        make_face()
    revolve(axis=Axis((-0.2187347988, -55.88, 0.080068318), (0, -1, 0)), revolution_arc=F5_T42_ANGLE, mode=Mode.SUBTRACT)

    # F6 (on Top) → F7 (join, symmetric)
    with BuildSketch(Plane.XY):
        Circle(F6_R)
    extrude(amount=F7_DEPTH, both=True)


solid = f1_4.part
